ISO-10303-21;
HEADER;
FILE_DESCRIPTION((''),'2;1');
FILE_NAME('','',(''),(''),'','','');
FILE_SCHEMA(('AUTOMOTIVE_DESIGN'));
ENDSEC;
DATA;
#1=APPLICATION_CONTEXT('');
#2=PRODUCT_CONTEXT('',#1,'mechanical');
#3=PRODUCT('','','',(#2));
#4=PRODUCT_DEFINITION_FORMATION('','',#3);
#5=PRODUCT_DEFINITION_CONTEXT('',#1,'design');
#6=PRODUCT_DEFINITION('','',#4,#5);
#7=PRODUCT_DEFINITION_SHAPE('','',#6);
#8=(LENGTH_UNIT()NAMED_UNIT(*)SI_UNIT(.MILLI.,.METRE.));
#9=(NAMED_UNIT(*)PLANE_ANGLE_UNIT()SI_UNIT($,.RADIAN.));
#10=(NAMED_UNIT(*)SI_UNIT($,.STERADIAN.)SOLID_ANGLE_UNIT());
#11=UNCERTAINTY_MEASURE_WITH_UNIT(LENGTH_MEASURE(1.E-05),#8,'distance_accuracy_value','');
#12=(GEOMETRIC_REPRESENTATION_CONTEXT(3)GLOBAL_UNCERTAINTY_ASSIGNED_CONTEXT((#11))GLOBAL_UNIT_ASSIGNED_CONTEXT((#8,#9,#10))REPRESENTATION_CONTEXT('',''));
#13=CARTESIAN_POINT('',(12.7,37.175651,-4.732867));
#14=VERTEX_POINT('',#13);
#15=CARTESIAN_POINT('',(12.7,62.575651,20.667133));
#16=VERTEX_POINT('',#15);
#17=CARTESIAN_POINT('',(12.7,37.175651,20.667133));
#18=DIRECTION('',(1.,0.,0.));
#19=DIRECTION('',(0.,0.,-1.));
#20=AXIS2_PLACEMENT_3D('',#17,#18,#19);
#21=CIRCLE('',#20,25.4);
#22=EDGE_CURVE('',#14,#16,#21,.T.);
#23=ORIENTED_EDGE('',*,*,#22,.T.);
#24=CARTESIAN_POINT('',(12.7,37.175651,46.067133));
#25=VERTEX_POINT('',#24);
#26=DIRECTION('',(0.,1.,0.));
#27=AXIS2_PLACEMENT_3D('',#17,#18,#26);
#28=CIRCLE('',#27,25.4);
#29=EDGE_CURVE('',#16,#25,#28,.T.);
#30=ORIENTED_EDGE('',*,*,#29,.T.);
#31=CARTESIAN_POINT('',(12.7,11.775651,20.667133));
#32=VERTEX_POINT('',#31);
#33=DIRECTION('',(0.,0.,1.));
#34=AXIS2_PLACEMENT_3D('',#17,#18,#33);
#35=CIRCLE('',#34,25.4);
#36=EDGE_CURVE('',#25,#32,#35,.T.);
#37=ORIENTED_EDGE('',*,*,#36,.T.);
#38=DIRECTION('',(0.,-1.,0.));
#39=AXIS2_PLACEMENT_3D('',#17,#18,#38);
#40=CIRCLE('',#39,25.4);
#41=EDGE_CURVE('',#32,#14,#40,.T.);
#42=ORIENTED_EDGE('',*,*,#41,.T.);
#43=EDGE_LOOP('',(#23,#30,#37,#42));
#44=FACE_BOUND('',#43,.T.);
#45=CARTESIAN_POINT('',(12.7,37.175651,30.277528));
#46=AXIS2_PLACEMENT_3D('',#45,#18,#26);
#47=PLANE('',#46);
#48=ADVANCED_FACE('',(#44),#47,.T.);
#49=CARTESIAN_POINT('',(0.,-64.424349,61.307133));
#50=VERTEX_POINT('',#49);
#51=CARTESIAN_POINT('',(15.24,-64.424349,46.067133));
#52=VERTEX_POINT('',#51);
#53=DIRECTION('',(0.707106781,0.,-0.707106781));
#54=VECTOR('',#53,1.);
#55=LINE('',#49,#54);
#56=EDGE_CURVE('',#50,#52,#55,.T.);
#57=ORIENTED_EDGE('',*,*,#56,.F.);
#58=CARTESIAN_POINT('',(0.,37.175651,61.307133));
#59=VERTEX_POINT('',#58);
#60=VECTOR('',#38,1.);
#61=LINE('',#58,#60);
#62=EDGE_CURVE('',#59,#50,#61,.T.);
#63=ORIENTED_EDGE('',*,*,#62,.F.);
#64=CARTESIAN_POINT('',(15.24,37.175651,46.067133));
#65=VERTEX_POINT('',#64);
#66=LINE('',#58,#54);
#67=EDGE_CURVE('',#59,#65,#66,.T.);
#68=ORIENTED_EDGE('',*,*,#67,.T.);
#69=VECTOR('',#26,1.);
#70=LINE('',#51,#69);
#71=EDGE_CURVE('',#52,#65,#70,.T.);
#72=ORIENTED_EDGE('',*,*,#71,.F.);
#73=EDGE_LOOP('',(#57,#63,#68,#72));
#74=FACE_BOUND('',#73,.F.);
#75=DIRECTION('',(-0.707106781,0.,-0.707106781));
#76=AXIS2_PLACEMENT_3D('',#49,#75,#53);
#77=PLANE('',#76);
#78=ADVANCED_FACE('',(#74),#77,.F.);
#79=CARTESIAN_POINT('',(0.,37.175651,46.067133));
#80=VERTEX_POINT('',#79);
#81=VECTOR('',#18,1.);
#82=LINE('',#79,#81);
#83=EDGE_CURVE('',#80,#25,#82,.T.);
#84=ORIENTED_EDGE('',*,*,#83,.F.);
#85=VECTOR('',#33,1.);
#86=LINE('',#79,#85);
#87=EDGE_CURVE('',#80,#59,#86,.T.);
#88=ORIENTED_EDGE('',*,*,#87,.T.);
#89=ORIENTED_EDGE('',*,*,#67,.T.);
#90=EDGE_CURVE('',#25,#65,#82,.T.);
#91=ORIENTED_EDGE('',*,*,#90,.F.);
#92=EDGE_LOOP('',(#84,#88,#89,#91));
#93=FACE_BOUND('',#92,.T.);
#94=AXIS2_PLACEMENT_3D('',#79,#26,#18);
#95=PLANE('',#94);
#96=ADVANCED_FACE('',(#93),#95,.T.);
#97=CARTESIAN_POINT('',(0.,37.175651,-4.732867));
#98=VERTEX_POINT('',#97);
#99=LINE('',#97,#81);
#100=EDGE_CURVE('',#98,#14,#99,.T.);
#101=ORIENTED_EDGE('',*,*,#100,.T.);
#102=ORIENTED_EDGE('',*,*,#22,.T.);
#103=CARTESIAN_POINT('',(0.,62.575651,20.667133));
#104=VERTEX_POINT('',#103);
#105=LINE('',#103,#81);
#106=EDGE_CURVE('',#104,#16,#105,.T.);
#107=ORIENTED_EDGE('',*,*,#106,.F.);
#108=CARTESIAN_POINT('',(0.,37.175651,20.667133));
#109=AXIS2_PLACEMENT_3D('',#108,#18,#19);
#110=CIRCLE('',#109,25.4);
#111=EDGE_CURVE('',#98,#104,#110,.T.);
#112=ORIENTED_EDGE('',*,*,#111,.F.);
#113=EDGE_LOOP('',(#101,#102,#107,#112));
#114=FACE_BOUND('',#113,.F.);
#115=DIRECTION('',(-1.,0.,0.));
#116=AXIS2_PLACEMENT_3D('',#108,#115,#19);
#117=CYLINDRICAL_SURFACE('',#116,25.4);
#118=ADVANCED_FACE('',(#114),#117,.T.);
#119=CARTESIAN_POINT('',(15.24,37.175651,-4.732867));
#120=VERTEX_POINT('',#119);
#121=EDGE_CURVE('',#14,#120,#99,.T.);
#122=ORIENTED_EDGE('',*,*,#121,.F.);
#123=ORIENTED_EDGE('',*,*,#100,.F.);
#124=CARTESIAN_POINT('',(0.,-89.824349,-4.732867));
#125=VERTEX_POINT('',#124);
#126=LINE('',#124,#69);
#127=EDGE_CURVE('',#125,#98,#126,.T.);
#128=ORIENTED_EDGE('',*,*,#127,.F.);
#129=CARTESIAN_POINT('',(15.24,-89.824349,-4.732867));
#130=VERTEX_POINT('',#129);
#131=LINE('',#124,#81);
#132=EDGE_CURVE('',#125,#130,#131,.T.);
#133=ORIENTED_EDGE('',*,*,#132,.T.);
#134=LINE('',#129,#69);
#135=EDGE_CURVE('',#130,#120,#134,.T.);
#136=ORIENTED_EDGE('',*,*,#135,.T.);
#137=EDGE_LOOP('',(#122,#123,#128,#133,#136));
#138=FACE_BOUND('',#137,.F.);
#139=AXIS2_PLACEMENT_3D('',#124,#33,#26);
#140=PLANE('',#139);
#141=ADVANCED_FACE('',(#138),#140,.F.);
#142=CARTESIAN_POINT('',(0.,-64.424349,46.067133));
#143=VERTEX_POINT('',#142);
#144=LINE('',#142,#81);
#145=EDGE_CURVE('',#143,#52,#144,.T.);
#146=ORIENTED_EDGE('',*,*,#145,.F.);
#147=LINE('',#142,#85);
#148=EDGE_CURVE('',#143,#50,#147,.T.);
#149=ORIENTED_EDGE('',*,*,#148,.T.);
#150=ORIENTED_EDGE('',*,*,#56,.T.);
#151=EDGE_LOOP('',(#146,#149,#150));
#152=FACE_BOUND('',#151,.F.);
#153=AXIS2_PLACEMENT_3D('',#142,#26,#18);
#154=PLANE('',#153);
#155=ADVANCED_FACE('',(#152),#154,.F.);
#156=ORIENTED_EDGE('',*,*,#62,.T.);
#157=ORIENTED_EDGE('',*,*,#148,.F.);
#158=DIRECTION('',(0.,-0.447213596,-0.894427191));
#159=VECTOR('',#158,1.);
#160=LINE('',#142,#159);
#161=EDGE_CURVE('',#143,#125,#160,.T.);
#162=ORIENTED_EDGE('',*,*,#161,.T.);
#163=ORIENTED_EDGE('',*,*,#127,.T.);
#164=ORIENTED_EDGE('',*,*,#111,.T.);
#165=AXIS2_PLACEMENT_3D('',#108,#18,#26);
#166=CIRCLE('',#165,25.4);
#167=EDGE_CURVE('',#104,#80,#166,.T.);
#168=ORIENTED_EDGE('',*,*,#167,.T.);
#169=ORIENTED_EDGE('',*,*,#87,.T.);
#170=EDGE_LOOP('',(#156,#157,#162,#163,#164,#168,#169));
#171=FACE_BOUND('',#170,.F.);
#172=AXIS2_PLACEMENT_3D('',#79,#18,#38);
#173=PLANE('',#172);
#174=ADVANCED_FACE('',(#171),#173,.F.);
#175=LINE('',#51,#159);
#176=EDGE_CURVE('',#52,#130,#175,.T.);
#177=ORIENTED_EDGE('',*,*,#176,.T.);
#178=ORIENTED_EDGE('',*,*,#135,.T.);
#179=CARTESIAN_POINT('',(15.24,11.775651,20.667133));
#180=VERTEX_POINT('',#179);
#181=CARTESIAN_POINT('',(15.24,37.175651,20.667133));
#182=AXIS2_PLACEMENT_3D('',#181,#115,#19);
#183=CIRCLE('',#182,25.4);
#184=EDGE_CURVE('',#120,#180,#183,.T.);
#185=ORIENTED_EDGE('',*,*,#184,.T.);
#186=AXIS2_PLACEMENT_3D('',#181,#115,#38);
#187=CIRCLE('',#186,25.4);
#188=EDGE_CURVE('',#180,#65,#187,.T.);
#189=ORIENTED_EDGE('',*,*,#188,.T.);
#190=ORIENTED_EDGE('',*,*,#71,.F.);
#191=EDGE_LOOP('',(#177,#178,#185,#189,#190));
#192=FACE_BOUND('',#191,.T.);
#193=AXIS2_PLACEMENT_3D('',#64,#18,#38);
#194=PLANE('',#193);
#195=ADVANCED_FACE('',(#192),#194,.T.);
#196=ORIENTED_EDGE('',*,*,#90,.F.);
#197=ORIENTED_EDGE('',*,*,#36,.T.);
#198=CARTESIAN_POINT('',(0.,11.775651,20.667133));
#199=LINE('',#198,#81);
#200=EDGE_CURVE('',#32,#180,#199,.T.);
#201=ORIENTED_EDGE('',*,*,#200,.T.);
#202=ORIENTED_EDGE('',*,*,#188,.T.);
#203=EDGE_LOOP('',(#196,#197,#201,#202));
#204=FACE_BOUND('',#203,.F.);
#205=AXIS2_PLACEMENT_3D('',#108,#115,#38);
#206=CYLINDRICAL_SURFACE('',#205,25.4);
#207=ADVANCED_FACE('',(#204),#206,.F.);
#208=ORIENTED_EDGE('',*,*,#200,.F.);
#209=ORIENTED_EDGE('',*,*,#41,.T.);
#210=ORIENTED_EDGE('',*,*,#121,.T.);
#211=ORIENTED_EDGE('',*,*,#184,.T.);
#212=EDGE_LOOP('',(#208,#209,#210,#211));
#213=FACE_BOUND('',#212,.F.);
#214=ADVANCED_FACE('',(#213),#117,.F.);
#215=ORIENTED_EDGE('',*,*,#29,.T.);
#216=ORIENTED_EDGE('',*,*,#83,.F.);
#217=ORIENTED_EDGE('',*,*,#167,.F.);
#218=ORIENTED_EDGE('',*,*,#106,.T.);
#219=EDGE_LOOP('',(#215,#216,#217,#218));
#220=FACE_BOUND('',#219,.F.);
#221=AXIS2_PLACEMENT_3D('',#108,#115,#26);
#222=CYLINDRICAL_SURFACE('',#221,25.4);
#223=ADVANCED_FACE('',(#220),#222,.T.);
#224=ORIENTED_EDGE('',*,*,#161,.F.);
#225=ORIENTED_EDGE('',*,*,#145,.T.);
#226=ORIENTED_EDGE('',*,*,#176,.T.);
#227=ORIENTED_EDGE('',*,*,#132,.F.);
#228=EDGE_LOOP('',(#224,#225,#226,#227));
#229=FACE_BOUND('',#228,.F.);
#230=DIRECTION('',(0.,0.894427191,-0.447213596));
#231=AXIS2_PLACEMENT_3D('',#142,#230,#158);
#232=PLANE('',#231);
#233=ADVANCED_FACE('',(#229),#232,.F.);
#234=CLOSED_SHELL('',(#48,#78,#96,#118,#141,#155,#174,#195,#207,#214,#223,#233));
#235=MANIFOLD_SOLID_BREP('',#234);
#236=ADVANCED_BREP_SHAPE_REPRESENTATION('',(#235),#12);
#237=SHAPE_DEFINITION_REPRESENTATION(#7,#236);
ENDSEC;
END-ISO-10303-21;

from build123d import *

# Parameters (mm, degrees)
F1_DEPTH = 15.24
F2_DEPTH = 12.7
F3_DEPTH = 15.24
F5_DEPTH = 101.6


# Not quite as in the source:
# - a feature names something its author has since deleted; it is built from what else it names


with BuildPart() as f1:
    # F0 (on Right) → F1 (new body)
    with BuildSketch(Plane.YZ):
        with BuildLine():
            ThreePointArc((37.1756509936, -4.7328671039), (19.2151387515, 2.7066206539), (11.7756509936, 20.6671328961))
            Line((11.7756509936, 20.6671328961), (-77.1243490064, 20.6671328961))
            Line((-77.1243490064, 20.6671328961), (-89.8243490064, -4.7328671039))
            Line((-89.8243490064, -4.7328671039), (37.1756509936, -4.7328671039))
        make_face()
        with BuildLine():
            Line((-77.1243490064, 20.6671328961), (11.7756509936, 20.6671328961))
            ThreePointArc((11.7756509936, 20.6671328961), (19.2151387515, 38.6276451382), (37.1756509936, 46.0671328961))
            Line((37.1756509936, 46.0671328961), (-64.4243490064, 46.0671328961))
            Line((-64.4243490064, 46.0671328961), (-77.1243490064, 20.6671328961))
        make_face()
    extrude(amount=F1_DEPTH)

    # F0 (on Right) → F2 (join)
    with BuildSketch(Plane.YZ):
        with BuildLine():
            Line((11.7756509936, 20.6671328961), (62.5756509936, 20.6671328961))
            ThreePointArc((62.5756509936, 20.6671328961), (55.1361632357, 38.6276451382), (37.1756509936, 46.0671328961))
            ThreePointArc((37.1756509936, 46.0671328961), (19.2151387515, 38.6276451382), (11.7756509936, 20.6671328961))
        make_face()
        with BuildLine():
            ThreePointArc((37.1756509936, -4.7328671039), (55.1361632357, 2.7066206539), (62.5756509936, 20.6671328961))
            Line((62.5756509936, 20.6671328961), (11.7756509936, 20.6671328961))
            ThreePointArc((11.7756509936, 20.6671328961), (19.2151387515, 2.7066206539), (37.1756509936, -4.7328671039))
        make_face()
    extrude(amount=F2_DEPTH)

    # F3 (add): a face of the model
    f3_faces = [f1.faces().sort_by_distance(p)[0] for p in [
        (7.62, -13.6243490064, 46.0671328961),
    ]]
    extrude(f3_faces, amount=F3_DEPTH)

    # F4 (on face) → F5 (cut)
    with BuildSketch(Plane.XZ.offset(64.4243490064)):
        Polygon((15.24, 61.3071328961), (0, 61.3071328961), (15.24, 46.0671328961), align=None)
    extrude(amount=-F5_DEPTH, mode=Mode.SUBTRACT)


solid = f1.part
